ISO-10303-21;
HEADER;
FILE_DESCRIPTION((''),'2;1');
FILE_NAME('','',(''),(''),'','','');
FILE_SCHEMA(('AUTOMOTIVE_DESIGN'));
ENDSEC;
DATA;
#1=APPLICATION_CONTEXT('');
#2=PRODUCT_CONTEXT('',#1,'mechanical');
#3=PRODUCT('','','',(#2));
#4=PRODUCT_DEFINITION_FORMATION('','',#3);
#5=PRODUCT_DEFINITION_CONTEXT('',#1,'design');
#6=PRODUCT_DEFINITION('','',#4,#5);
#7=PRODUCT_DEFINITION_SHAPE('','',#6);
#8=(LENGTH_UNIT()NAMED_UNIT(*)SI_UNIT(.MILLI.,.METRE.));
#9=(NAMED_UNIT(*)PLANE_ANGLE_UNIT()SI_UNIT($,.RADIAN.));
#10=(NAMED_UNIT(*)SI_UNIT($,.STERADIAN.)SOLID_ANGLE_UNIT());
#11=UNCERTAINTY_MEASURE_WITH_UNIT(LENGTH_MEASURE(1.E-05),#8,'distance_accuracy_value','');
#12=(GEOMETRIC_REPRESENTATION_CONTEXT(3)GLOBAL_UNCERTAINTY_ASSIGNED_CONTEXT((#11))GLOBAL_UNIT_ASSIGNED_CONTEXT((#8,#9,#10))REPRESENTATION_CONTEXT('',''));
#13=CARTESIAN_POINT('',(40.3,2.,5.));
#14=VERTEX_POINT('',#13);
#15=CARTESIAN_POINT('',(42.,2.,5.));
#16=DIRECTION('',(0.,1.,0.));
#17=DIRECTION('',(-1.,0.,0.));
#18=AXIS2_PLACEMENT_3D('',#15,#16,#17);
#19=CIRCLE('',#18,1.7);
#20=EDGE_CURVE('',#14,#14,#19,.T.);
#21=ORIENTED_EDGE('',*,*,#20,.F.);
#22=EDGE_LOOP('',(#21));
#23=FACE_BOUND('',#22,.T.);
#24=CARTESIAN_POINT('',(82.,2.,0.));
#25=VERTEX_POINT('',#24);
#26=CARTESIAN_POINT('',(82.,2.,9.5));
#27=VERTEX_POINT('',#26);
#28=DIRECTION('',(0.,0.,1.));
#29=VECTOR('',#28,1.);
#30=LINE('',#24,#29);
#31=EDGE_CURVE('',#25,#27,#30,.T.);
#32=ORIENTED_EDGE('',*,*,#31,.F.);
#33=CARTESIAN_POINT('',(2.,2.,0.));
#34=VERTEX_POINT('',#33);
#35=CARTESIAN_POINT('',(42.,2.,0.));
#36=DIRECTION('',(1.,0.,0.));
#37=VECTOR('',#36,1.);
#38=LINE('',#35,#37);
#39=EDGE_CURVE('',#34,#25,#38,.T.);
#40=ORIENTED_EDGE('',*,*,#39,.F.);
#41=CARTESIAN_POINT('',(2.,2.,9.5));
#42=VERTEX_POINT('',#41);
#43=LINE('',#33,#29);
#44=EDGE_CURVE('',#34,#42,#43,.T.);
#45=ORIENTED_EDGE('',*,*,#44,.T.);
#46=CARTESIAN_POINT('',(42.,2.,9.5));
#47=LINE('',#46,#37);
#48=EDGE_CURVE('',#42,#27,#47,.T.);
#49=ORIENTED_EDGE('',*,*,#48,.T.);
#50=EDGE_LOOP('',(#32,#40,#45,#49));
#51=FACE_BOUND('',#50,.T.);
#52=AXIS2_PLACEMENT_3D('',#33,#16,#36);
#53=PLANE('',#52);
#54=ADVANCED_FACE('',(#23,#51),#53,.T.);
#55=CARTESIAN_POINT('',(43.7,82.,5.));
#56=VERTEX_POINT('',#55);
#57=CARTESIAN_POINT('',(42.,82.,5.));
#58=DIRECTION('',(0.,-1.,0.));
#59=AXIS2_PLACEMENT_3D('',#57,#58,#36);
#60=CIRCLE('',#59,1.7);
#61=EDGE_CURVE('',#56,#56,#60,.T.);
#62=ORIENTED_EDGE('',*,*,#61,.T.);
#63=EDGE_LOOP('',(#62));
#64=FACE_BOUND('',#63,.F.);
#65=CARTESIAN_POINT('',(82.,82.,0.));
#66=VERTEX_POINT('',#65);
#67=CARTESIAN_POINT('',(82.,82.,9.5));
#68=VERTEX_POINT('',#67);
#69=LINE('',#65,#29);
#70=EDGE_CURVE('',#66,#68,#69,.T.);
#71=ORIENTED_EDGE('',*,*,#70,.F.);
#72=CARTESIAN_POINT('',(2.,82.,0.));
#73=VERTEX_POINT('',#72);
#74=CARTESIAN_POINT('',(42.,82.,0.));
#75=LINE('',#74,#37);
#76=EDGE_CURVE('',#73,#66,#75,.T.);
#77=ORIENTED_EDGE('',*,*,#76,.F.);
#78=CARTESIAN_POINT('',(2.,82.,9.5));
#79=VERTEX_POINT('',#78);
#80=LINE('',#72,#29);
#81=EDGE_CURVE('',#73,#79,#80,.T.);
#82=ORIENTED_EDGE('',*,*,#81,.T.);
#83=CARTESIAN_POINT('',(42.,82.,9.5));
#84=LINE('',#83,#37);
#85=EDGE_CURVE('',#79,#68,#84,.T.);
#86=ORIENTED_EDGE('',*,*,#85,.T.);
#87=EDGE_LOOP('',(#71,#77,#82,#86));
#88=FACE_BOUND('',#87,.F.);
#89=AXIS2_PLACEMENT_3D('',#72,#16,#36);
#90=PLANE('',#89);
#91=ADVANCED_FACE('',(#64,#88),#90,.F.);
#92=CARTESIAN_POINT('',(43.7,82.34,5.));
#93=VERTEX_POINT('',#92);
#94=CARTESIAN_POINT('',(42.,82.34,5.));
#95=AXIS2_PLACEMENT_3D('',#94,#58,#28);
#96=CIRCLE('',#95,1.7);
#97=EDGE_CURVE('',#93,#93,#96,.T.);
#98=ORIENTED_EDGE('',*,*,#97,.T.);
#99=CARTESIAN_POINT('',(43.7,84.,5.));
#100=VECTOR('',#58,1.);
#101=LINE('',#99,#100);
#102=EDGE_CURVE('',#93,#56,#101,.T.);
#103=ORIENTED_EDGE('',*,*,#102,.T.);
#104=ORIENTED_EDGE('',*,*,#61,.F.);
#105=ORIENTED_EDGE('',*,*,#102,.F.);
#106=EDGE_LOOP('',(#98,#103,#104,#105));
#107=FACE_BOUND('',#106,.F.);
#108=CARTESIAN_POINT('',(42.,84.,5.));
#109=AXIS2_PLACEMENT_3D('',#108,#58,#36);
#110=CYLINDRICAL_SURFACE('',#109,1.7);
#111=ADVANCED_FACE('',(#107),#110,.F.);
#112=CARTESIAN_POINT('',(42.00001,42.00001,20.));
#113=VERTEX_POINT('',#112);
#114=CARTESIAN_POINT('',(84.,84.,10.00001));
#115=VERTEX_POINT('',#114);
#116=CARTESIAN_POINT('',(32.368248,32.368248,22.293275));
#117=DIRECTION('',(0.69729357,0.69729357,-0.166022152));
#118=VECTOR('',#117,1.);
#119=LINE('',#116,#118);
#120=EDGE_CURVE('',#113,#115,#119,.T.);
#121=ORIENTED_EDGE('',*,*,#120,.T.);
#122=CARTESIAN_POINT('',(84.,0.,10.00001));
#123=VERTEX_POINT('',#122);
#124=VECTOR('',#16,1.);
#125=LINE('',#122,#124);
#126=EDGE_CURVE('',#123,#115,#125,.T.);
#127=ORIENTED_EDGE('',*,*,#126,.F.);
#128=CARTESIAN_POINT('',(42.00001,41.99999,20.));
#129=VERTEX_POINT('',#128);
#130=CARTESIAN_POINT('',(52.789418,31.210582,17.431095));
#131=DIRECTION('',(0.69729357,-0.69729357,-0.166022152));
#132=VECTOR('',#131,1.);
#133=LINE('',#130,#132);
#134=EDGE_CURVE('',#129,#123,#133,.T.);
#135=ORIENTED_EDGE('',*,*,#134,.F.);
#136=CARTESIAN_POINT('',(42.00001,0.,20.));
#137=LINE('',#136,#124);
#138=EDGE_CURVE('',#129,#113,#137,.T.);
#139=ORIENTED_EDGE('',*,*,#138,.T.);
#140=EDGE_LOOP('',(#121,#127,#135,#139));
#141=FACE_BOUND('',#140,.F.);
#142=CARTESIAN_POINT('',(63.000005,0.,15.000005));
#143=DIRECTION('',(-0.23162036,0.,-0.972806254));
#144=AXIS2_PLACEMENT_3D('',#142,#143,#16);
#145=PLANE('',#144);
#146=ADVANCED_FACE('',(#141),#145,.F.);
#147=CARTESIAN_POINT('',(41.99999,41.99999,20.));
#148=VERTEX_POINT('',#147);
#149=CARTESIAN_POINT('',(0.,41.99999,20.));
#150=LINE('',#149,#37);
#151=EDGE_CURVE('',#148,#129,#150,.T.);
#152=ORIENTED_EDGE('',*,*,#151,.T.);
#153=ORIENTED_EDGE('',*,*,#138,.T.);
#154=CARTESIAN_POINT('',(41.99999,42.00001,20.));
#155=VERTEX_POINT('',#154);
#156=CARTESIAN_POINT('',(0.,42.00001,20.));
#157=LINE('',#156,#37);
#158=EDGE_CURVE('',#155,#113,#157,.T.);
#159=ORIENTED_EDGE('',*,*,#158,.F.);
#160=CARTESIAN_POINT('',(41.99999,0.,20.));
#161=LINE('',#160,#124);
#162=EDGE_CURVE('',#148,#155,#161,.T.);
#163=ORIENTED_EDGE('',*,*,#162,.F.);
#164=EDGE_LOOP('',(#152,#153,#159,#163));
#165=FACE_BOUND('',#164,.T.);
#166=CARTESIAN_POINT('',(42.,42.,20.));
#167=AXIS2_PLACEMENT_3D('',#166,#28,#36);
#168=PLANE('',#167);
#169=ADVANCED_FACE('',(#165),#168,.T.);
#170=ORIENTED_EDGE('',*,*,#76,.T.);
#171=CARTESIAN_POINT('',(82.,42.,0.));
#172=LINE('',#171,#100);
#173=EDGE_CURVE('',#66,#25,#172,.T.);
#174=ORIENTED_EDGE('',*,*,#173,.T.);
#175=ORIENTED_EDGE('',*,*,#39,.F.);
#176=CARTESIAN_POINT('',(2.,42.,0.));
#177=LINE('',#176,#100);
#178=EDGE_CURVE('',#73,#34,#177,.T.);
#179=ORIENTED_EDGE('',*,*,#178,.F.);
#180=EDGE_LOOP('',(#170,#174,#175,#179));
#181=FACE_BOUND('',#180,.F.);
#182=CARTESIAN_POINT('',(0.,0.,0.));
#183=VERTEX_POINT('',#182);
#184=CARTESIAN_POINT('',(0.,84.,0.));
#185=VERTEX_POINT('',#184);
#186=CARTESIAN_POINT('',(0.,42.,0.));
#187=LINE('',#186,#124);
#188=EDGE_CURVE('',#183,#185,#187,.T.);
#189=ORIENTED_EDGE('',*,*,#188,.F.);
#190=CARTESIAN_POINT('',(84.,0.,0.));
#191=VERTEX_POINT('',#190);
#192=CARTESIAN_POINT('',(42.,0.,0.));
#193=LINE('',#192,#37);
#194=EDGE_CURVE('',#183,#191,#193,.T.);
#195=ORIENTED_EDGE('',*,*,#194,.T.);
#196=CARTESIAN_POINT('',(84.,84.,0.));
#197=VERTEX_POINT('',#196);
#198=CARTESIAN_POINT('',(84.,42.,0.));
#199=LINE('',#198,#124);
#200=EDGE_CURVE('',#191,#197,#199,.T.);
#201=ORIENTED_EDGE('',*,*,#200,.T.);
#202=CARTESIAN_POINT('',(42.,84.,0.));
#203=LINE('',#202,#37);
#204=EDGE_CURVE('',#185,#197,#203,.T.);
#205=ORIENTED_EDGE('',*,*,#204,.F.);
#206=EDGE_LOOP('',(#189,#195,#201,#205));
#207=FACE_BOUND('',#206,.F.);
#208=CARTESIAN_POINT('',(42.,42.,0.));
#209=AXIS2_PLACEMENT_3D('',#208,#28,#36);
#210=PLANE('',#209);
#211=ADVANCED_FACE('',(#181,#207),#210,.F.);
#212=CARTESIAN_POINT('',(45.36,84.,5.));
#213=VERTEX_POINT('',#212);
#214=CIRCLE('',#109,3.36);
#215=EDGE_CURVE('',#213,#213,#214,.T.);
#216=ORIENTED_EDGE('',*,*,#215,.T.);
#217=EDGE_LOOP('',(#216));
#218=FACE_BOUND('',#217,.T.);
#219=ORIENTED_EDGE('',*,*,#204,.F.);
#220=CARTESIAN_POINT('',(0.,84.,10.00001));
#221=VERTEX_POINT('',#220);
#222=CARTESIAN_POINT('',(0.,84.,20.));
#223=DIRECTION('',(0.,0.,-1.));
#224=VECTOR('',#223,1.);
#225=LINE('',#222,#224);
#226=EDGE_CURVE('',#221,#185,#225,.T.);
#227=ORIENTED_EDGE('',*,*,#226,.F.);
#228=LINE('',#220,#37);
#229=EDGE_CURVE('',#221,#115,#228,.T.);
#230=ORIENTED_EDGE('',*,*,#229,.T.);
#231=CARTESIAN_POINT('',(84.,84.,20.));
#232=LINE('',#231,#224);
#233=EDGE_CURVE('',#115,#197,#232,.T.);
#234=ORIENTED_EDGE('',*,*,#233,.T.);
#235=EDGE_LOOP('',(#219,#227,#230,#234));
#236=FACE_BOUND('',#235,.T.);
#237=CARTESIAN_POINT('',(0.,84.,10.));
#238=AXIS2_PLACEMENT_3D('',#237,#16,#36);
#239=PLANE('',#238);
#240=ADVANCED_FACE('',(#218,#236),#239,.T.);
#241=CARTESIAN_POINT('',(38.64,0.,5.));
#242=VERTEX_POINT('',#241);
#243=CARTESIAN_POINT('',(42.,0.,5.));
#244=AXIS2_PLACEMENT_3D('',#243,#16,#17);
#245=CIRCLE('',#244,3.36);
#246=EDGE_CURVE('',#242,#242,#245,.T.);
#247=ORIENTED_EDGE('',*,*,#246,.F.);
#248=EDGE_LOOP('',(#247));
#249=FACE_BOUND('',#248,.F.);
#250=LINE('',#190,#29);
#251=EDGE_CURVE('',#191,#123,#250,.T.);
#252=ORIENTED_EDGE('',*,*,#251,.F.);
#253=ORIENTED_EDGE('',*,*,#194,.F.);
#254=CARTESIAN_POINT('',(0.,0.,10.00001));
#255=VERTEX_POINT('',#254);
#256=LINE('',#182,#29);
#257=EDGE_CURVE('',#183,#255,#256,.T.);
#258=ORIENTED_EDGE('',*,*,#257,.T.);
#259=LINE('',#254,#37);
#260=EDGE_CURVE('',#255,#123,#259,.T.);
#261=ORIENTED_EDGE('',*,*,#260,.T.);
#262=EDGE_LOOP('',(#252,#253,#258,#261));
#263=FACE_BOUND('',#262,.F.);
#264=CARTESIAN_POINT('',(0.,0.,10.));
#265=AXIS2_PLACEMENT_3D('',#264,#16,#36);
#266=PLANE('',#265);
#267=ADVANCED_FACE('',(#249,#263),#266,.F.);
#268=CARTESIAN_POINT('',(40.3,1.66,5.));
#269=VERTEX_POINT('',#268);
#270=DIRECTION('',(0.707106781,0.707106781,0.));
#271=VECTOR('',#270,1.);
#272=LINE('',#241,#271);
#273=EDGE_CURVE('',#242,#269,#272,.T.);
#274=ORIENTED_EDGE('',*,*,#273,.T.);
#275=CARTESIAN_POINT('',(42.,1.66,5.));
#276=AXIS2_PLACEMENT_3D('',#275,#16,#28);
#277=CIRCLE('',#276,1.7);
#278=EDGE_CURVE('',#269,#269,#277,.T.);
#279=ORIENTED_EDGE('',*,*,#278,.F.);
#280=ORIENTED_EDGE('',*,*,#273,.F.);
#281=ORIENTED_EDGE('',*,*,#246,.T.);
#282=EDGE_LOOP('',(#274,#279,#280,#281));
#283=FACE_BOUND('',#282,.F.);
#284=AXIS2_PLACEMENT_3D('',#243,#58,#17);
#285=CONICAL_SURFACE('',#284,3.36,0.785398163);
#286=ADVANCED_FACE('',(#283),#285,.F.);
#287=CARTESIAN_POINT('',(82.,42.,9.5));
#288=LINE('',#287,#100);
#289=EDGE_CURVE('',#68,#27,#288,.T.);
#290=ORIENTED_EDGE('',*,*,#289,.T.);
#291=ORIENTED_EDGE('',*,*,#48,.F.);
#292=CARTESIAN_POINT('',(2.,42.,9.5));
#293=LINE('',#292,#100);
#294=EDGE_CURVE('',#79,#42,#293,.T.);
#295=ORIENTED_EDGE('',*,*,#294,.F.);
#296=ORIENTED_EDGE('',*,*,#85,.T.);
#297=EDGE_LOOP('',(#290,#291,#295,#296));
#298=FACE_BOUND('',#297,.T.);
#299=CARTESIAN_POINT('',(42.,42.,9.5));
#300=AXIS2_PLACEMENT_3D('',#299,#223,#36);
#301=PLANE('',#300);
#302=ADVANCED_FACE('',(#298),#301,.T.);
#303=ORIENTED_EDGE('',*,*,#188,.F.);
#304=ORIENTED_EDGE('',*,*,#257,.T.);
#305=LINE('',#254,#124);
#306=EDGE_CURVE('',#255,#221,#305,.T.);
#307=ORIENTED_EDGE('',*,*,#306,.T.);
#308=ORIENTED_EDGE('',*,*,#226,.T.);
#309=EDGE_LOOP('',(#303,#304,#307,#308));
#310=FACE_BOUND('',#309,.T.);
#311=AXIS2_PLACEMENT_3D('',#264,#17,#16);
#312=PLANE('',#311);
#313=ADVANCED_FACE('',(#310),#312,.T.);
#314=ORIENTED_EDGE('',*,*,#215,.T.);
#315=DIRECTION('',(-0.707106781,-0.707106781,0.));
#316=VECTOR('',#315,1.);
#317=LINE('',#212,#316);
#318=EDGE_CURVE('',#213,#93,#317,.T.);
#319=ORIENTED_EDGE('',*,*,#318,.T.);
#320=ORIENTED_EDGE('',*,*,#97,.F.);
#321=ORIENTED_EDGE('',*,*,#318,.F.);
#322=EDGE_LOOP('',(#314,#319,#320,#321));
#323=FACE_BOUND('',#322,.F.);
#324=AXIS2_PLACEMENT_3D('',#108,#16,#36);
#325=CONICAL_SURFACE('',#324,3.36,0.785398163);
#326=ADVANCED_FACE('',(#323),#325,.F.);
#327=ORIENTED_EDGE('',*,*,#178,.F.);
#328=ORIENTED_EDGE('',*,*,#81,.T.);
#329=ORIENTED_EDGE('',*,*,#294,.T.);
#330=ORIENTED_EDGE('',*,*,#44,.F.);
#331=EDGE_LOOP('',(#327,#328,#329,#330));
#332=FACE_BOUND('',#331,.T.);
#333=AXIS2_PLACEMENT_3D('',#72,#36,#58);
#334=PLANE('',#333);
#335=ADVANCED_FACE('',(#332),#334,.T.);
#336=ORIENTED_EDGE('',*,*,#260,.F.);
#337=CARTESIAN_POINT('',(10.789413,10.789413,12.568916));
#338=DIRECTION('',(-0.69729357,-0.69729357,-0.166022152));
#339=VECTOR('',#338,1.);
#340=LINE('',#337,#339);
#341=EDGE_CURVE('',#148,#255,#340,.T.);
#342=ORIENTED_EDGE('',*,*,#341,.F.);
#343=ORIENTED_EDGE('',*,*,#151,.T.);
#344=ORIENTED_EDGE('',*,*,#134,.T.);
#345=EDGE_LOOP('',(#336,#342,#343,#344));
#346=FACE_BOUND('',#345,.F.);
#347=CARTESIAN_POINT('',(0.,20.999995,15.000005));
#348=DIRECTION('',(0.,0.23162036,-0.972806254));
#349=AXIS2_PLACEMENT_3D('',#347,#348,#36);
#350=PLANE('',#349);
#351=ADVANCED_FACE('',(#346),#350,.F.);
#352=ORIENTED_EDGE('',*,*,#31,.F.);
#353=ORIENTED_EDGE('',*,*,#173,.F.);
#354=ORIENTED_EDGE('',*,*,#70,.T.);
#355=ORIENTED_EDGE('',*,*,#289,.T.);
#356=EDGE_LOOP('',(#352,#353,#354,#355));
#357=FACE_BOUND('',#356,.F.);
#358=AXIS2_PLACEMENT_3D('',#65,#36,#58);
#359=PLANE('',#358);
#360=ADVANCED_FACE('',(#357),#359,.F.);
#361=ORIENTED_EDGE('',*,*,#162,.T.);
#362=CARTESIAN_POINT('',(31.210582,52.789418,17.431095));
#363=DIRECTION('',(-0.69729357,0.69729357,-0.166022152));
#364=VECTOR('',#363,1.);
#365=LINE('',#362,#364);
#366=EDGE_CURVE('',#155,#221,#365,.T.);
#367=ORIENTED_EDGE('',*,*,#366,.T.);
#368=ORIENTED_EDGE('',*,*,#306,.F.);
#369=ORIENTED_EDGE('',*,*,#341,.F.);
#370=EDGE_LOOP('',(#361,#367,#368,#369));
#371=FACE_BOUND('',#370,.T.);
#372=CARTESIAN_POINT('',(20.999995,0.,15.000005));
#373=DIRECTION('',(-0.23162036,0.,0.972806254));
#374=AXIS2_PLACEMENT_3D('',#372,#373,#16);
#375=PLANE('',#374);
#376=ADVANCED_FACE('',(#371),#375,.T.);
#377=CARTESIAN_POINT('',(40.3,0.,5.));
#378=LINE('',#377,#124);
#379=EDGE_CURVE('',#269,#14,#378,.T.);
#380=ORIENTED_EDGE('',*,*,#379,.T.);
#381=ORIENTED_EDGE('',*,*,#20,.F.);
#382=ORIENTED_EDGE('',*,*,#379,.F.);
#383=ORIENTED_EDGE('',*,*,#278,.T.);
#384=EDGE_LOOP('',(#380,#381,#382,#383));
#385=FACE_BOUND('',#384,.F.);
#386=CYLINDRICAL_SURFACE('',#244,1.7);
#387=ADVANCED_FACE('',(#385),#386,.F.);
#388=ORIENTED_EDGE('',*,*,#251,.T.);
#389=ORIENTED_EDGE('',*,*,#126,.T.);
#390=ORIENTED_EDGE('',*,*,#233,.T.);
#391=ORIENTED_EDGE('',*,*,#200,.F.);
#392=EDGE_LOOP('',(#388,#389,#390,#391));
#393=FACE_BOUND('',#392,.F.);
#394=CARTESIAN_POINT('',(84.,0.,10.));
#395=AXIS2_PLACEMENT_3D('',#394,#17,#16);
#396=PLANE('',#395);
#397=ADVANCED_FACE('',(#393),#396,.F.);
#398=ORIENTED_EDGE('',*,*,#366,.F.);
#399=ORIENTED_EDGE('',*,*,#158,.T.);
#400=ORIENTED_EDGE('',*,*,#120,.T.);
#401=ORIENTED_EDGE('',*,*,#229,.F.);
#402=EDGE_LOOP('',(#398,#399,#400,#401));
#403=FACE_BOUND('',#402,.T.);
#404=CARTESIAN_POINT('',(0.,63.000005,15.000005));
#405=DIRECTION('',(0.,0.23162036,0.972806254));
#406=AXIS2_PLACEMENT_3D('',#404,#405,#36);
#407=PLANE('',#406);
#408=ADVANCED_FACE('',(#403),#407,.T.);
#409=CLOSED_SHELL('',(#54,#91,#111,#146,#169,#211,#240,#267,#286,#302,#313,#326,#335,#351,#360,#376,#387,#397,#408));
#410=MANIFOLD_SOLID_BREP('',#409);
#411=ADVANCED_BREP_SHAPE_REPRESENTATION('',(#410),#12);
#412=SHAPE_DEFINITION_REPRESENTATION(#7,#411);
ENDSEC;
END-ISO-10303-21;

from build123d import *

# Parameters (mm, degrees)
F0_W            = 84
F0_H            = 84
F1_DEPTH        = 10
F2_W            = 80
F2_H            = 80
F3_DEPTH        = 9.5
F4_W            = 84
F4_H            = 84
F5_DEPTH        = 10
F6_SIZE2        = 9.99999
F6_SIZE         = 41.99999
F8_D            = 3.4
F8_DEPTH        = 12
F8_CSINK_D      = 6.72
F8_CSINK_ANGLE  = 90
F8_TIP          = 1.0214630523
F10_D           = 3.4
F10_DEPTH       = 12
F10_CSINK_D     = 6.72
F10_CSINK_ANGLE = 90
F10_TIP         = 1.0214630523


# Not quite as in the source:
# - a fillet or chamfer is up to 0.001 mm smaller than in the source, because OpenCascade refuses the exact size


with BuildPart() as f1:
    # F0 (on Top) → F1 (new body)
    with BuildSketch(Plane.XY):
        with Locations((42, 42)):
            Rectangle(F0_W, F0_H)
    extrude(amount=F1_DEPTH)

    # F2 (on face) → F3 (cut)
    with BuildSketch(Plane(origin=(0, 0, 0), x_dir=(1, 0, 0), z_dir=(0, 0, -1))):
        with Locations((42, -42)):
            Rectangle(F2_W, F2_H)
    extrude(amount=-F3_DEPTH, mode=Mode.SUBTRACT)

    # F4 (on face) → F5 (join)
    with BuildSketch(Plane.XY.offset(10)):
        with Locations((42, 42)):
            Rectangle(F4_W, F4_H)
    extrude(amount=F5_DEPTH)

    # F6 (size 42 and 10 in the source; OpenCascade refuses exactly that, so slightly less here)
    f6_edges = [f1.edges().sort_by_distance(p)[0] for p in [
        (0, 42, 20),
        (42, 84, 20),
        (84, 42, 20),
        (42, 0, 20),
    ]]
    f6_side = f1.faces().sort_by_distance((42, 42, 20))[0]
    chamfer(f6_edges, length=F6_SIZE, length2=F6_SIZE2, reference=f6_side)

    # F8
    with Locations(Plane.XZ):
        with Locations((42, 5)):
            CounterSinkHole(F8_D / 2, F8_CSINK_D / 2, depth=F8_DEPTH, counter_sink_angle=F8_CSINK_ANGLE)
            with Locations((0, 0, -(F8_DEPTH + F8_TIP / 2))):  # 118° drill point
                Cone(0, F8_D / 2, F8_TIP, mode=Mode.SUBTRACT)

    # F10
    with Locations(Plane(origin=(0, 84, 0), x_dir=(-1, 0, 0), z_dir=(0, 1, 0))):
        with Locations((-42, 5)):
            CounterSinkHole(F10_D / 2, F10_CSINK_D / 2, depth=F10_DEPTH, counter_sink_angle=F10_CSINK_ANGLE)
            with Locations((0, 0, -(F10_DEPTH + F10_TIP / 2))):  # 118° drill point
                Cone(0, F10_D / 2, F10_TIP, mode=Mode.SUBTRACT)


solid = f1.part
